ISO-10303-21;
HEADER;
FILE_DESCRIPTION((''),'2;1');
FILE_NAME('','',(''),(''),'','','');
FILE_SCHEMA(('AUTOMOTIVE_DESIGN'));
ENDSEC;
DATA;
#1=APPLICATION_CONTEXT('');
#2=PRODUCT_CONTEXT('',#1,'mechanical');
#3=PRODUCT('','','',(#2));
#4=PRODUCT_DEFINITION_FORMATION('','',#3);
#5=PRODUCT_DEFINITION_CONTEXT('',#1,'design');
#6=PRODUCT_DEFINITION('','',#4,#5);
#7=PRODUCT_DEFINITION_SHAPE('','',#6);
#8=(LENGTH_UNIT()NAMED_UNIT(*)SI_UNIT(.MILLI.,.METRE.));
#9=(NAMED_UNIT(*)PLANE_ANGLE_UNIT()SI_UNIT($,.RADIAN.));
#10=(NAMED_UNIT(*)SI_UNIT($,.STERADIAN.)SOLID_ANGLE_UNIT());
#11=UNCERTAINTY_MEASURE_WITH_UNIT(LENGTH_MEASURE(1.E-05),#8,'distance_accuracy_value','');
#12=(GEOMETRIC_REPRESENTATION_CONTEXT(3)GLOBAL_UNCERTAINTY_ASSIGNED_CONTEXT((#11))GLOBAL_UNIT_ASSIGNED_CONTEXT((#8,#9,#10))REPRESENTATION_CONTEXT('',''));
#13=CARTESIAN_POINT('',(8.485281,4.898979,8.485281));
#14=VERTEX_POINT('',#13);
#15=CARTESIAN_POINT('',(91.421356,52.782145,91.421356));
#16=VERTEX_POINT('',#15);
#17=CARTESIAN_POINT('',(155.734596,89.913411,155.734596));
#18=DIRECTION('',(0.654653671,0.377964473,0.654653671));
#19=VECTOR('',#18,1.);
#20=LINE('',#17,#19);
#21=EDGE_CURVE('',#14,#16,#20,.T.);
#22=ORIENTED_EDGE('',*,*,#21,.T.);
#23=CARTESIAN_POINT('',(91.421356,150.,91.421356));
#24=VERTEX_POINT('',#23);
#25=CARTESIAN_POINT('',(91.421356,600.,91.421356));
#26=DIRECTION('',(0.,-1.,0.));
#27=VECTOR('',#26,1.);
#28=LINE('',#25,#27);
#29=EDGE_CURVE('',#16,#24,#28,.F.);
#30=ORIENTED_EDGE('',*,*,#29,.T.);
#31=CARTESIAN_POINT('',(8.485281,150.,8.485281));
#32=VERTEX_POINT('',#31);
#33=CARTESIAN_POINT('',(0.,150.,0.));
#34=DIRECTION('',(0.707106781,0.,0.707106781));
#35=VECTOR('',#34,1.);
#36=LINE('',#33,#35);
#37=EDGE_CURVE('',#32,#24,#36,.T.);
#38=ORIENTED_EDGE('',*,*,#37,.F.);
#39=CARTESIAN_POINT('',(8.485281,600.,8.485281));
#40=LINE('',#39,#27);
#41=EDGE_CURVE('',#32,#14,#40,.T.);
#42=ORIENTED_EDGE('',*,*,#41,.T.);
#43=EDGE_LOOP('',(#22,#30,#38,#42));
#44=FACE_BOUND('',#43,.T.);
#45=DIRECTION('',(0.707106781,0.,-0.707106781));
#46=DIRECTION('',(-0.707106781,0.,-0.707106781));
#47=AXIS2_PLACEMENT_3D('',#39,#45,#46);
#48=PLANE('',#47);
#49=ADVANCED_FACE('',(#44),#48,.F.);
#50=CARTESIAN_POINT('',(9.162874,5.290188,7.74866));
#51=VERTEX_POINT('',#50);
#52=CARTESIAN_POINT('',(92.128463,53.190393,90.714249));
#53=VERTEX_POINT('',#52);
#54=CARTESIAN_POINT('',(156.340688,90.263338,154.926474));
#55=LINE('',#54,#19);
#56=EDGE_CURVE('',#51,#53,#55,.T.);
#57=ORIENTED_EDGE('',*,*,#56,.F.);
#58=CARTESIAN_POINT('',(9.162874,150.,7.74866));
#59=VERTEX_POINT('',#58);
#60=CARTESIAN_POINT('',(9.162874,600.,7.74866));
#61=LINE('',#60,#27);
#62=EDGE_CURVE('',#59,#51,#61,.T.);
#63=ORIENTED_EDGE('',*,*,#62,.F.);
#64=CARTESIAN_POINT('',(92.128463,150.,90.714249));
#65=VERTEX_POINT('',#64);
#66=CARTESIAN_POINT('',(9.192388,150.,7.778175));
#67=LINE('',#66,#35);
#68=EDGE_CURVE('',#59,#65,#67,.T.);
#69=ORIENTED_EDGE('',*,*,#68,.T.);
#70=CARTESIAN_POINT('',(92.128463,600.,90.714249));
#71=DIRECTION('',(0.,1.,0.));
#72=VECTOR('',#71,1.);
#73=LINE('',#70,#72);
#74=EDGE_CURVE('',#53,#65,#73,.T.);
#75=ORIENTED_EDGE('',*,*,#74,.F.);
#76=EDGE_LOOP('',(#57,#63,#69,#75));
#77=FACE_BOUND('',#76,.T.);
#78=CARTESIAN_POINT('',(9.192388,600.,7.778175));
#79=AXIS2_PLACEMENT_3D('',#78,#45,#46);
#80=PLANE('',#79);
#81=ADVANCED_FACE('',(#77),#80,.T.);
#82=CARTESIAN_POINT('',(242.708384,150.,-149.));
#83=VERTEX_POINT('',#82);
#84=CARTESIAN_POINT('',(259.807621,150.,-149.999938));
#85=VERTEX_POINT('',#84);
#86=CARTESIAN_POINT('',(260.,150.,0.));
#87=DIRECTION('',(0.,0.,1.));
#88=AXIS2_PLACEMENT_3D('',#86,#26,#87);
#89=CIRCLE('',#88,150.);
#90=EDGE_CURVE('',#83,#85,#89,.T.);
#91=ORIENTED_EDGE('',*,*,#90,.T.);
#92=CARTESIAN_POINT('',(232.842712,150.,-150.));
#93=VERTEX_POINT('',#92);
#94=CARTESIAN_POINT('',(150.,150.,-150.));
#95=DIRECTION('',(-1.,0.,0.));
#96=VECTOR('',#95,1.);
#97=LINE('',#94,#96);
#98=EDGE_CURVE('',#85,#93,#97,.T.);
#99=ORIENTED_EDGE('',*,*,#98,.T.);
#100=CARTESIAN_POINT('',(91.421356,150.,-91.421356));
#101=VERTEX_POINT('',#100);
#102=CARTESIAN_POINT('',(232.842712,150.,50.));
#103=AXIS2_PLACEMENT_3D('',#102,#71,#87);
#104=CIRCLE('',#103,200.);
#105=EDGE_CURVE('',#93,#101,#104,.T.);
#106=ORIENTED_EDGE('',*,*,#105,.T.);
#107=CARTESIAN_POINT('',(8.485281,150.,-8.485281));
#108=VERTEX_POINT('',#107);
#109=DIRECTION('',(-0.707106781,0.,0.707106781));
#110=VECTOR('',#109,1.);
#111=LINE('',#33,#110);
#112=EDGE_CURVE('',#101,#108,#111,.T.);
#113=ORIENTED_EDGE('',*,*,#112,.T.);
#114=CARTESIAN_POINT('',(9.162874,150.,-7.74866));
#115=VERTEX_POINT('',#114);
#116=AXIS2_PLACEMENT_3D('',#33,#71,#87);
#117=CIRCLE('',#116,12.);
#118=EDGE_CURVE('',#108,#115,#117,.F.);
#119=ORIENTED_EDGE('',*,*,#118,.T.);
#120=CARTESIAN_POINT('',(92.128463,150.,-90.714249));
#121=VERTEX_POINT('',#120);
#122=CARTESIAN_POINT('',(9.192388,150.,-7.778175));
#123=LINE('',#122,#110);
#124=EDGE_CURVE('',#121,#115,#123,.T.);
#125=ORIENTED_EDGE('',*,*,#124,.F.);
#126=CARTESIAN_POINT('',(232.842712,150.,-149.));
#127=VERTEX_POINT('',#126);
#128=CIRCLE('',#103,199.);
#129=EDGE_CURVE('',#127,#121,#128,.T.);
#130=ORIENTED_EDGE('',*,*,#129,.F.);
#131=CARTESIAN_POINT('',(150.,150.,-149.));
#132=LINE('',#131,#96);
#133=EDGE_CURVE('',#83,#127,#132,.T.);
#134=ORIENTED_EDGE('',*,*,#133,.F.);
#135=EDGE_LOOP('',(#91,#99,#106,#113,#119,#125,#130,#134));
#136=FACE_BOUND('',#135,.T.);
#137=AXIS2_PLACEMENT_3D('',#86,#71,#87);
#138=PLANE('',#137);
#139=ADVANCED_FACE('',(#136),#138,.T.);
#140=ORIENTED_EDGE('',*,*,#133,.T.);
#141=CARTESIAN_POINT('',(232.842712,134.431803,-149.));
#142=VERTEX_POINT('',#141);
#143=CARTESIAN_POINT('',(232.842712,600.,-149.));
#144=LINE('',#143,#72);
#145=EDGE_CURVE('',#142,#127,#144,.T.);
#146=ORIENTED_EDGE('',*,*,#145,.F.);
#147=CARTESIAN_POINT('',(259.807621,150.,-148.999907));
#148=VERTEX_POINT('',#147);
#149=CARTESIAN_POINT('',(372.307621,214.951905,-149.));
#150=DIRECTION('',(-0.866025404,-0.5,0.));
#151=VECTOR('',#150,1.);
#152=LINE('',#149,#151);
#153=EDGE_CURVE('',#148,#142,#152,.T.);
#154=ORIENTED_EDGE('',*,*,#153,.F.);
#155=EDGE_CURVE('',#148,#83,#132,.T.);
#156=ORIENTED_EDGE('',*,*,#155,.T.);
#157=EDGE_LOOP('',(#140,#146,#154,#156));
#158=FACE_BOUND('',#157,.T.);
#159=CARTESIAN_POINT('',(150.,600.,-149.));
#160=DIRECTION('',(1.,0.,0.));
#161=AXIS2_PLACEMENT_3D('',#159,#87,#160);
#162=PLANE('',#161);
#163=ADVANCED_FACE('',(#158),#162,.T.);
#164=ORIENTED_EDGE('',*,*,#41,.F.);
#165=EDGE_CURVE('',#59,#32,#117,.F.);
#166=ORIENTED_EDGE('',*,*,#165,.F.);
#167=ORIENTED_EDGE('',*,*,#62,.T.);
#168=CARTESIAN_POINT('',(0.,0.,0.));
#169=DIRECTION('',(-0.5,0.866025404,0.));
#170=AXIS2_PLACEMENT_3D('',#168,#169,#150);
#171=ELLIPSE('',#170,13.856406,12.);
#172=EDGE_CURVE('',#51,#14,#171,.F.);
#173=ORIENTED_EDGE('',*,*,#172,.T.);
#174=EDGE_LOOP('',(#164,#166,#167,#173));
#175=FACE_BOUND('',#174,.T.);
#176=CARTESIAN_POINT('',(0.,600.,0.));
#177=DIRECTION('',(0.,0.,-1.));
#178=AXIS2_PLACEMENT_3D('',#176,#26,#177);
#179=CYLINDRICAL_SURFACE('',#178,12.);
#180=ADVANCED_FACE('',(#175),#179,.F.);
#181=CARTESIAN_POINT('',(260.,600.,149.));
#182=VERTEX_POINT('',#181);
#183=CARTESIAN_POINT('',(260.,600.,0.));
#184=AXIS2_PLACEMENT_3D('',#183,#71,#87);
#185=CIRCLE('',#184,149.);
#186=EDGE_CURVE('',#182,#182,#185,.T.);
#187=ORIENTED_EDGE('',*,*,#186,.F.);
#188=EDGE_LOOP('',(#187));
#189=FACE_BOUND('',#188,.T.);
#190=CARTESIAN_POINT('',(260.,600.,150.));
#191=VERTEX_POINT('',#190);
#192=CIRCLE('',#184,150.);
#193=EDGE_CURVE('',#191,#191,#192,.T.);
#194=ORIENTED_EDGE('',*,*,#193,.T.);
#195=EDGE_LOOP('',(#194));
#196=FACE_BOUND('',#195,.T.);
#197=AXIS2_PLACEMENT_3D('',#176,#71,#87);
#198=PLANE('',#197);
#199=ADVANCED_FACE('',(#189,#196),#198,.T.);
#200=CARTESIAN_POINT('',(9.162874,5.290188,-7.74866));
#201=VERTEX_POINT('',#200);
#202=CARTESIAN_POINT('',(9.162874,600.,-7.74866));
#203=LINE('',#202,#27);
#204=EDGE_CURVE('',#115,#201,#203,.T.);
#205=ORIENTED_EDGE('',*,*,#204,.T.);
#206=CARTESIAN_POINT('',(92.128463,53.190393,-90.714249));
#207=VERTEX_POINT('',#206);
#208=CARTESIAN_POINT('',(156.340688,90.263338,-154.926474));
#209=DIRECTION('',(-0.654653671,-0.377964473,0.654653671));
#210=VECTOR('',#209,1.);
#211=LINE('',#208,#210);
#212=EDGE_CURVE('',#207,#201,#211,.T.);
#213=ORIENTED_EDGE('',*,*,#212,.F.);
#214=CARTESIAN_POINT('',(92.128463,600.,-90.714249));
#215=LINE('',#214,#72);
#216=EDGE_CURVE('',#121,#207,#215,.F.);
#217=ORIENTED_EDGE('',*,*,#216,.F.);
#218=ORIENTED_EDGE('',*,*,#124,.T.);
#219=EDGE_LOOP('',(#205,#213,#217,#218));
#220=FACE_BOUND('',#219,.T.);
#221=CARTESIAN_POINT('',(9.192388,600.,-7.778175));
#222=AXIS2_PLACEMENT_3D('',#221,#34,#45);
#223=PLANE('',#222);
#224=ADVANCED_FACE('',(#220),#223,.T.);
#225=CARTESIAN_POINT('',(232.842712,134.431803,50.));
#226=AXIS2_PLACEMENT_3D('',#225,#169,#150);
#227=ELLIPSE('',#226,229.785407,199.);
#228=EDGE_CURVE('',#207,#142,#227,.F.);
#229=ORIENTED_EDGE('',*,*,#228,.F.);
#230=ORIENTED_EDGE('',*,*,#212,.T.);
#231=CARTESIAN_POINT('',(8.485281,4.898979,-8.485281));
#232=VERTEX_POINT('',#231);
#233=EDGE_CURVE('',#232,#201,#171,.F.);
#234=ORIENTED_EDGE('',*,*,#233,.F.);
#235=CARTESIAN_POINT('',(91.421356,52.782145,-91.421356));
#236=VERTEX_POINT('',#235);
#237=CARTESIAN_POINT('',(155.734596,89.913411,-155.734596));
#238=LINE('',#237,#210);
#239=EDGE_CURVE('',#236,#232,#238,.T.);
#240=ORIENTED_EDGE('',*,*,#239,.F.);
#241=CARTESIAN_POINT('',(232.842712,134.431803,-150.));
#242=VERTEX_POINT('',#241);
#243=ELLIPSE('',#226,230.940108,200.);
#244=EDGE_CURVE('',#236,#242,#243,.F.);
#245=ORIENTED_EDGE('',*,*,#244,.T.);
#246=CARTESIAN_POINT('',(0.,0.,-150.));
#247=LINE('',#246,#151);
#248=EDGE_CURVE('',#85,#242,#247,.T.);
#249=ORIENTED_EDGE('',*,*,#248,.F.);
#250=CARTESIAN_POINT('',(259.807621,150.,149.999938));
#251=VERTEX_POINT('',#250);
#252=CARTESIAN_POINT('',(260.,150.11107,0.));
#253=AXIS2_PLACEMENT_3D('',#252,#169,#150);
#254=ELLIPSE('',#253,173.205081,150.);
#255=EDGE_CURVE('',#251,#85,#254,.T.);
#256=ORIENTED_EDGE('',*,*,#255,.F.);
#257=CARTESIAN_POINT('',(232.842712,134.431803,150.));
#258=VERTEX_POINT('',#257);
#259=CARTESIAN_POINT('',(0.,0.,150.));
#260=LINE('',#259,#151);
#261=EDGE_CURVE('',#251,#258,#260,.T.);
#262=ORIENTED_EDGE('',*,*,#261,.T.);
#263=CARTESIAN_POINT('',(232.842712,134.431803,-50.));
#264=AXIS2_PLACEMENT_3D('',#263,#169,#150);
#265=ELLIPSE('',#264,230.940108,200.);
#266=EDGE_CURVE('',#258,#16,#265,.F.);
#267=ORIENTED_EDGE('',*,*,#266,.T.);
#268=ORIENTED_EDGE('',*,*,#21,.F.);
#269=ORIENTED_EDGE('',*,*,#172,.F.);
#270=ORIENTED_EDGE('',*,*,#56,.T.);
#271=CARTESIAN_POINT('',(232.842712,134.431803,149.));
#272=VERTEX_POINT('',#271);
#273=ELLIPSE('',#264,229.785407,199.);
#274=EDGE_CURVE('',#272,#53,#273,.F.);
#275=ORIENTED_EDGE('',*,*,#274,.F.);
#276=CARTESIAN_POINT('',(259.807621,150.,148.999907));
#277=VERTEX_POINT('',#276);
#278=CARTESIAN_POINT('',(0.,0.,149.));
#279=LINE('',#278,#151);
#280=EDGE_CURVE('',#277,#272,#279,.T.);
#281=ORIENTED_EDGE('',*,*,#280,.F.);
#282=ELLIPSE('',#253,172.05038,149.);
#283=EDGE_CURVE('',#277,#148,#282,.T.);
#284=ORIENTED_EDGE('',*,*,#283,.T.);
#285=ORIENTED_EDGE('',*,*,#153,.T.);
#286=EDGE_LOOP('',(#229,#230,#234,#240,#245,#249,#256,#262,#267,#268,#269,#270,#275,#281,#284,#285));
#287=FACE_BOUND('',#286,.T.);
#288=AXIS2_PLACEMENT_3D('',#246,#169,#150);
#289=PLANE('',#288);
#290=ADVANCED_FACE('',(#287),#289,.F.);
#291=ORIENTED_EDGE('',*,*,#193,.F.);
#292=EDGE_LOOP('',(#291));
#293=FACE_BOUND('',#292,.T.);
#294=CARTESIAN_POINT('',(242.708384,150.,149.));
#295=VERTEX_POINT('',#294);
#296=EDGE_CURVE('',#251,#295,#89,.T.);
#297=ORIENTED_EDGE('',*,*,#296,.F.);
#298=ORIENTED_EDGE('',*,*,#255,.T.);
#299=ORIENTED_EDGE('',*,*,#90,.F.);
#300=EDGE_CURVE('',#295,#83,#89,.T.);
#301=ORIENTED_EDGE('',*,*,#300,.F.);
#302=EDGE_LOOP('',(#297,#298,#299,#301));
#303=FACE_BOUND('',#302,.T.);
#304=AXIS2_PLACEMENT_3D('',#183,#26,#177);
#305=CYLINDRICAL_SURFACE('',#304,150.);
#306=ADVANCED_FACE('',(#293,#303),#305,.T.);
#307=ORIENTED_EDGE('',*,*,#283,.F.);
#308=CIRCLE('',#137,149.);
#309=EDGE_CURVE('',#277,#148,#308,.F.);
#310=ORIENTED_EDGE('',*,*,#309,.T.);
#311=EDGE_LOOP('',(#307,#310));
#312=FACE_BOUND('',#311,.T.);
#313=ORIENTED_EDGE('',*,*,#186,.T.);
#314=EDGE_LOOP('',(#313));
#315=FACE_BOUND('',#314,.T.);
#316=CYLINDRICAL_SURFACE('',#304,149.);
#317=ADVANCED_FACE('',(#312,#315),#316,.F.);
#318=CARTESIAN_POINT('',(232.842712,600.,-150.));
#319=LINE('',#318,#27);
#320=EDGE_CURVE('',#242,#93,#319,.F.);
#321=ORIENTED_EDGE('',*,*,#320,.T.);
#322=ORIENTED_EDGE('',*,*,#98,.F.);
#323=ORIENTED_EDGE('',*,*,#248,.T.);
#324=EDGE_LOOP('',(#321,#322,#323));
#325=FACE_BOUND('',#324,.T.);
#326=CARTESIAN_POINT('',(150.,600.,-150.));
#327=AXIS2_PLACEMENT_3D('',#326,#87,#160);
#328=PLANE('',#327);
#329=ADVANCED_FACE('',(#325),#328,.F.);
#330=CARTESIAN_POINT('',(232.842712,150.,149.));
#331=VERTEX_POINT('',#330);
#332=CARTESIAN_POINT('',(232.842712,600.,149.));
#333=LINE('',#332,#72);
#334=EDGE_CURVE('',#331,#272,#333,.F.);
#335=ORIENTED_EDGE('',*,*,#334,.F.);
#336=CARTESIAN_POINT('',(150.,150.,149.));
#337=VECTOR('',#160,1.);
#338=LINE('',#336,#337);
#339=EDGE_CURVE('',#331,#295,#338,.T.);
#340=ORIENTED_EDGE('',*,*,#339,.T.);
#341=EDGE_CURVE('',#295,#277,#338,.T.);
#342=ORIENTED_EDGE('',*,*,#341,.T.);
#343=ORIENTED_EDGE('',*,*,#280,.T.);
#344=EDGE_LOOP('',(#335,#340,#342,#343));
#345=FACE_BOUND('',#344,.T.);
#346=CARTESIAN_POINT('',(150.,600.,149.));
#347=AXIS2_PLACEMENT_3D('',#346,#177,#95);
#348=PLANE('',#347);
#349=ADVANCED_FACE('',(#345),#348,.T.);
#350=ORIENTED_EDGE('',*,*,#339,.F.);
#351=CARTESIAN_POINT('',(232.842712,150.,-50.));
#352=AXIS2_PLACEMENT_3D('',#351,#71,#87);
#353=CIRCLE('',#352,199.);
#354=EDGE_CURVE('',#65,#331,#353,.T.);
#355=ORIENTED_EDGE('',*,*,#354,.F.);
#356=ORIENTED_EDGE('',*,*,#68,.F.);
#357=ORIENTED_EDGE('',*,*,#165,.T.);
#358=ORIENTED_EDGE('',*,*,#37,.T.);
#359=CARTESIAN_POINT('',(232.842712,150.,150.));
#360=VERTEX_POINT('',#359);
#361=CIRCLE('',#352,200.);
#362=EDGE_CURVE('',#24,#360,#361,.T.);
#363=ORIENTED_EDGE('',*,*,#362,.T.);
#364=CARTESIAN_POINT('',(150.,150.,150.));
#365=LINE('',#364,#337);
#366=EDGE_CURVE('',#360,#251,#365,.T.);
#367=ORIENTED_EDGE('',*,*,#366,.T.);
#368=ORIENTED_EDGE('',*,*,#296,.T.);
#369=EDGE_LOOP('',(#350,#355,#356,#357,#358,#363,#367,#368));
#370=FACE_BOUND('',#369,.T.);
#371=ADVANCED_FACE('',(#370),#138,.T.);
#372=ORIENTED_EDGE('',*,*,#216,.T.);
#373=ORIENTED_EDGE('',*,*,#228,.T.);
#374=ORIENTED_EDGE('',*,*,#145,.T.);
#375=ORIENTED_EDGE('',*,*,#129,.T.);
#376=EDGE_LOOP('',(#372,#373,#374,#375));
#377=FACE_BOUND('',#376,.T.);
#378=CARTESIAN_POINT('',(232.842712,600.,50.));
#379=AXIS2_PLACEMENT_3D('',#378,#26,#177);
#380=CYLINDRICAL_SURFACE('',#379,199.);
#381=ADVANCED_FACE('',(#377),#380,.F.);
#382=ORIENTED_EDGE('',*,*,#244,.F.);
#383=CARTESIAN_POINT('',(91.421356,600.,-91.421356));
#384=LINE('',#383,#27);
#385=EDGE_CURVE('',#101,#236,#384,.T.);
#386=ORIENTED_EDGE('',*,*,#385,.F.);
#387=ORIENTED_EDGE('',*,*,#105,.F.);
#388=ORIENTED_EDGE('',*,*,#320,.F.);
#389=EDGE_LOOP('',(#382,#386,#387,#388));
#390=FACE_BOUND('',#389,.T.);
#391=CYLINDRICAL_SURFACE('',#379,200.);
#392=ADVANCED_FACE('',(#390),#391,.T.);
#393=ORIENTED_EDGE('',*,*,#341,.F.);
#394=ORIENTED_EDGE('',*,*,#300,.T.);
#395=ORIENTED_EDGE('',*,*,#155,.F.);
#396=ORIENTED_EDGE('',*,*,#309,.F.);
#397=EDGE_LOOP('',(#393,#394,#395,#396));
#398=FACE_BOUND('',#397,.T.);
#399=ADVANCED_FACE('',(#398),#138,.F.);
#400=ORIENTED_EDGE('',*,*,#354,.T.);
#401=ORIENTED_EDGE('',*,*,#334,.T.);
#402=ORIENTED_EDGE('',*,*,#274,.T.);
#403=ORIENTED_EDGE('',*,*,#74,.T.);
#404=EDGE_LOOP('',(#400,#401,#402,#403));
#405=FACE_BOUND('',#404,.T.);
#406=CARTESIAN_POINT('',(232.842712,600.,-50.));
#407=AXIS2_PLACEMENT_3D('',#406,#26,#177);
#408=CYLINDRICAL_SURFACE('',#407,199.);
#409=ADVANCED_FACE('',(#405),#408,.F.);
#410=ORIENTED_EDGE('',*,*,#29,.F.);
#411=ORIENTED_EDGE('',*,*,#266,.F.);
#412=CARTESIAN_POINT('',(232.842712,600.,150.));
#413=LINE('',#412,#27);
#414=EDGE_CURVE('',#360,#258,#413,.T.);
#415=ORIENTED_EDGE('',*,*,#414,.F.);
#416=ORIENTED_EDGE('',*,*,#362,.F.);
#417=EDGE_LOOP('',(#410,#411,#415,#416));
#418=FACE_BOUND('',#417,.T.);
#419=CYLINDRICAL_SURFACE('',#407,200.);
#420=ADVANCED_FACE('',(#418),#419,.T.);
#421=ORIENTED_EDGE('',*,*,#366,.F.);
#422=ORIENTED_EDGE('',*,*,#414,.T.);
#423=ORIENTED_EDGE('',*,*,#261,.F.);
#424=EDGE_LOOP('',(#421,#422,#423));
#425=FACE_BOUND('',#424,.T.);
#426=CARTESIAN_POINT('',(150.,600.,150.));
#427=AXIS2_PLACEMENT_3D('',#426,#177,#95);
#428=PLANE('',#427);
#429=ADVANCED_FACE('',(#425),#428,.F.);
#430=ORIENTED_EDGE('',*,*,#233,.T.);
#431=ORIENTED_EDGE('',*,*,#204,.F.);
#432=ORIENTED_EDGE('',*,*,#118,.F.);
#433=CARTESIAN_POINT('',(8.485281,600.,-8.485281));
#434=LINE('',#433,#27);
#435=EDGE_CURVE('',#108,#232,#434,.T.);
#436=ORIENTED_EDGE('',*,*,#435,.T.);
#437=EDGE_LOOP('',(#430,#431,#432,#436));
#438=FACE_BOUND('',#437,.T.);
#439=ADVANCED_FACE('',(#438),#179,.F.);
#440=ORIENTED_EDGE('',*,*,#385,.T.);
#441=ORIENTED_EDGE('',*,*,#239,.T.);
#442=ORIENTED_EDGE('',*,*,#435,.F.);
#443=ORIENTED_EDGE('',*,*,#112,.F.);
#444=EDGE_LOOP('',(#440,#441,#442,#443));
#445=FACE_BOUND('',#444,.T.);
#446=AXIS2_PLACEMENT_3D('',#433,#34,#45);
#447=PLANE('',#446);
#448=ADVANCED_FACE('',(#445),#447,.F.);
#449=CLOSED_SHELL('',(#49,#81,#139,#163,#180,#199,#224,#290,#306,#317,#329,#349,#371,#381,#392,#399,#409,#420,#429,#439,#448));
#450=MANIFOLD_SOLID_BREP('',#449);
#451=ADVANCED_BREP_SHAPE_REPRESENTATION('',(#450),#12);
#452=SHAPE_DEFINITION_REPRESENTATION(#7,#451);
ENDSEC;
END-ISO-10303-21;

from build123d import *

# Parameters (mm, degrees)
BOSS_EXTRUDE1_DEPTH     = 600
CUT_EXTRUDE1_DEPTH      = 743.024258364
CUT_EXTRUDE1_DEPTH_BACK = 743.024258364
CUT_EXTRUDE2_START      = -450
CUT_EXTRUDE2_DEPTH      = 450
FILLET1_R               = 200
SHELL2_START            = 53.190392924
SHELL2_OUTLINE_R        = 149
SHELL2_DEPTH            = 546.809607076
SHELL2_START_2          = 5.290187796
SHELL2_2_DEPTH          = 144.709812204


# Read off the part's stored shape, not the designer's step: Shell2
with BuildPart() as part:
    # Sketch1 → Boss-Extrude1 (new body)
    with BuildSketch(Plane(origin=(0, 0, 0), x_dir=(1, 0, 0), z_dir=(0, 1, 0))):
        with BuildLine():
            Line((8.485281374, -8.485281374), (150, -150))
            Line((150, -150), (260, -150))
            ThreePointArc((260, -150), (410, 0), (260, 150))
            Line((260, 150), (150, 150))
            Line((150, 150), (8.485281374, 8.485281374))
            ThreePointArc((8.485281374, 8.485281374), (12, 0), (8.485281374, -8.485281374))
        make_face()
    extrude(amount=BOSS_EXTRUDE1_DEPTH)

    # Sketch2 → Cut-Extrude1 (cut, two sides: drawn at the far end of the back side and taken through both)
    with BuildSketch(Plane.XY.offset(-CUT_EXTRUDE1_DEPTH_BACK)):
        Polygon((0, 0), (410, 236.713610368), (410, 0), align=None)
    extrude(amount=CUT_EXTRUDE1_DEPTH + CUT_EXTRUDE1_DEPTH_BACK, mode=Mode.SUBTRACT)

    # Sketch3 → Cut-Extrude2 (cut)
    with BuildSketch(Plane(origin=(0, 600, 0), x_dir=(1, 0, 0), z_dir=(0, 1, 0)).offset(CUT_EXTRUDE2_START)):
        with BuildLine():
            Line((0, 0), (150, 150))
            Line((150, 150), (260, 150))
            ThreePointArc((260, 150), (110, 0), (260, -150))
            Line((260, -150), (150, -150))
            Line((150, -150), (0, 0))
        make_face()
    extrude(amount=CUT_EXTRUDE2_DEPTH, mode=Mode.SUBTRACT)

    # Fillet1
    fillet1_edges = [part.edges().sort_by_distance(p)[0] for p in [
        (150, 118.301270189, 150),
        (150, 118.301270189, -150),
    ]]
    fillet(fillet1_edges, radius=FILLET1_R)

    # Shell2 outline → Shell2 (cut)
    with BuildSketch(Plane(origin=(0, 0, 0), x_dir=(1, 0, 0), z_dir=(0, 1, 0)).offset(SHELL2_START)):
        with Locations((260, 0)):
            Circle(SHELL2_OUTLINE_R)
    extrude(amount=SHELL2_DEPTH, mode=Mode.SUBTRACT)

    # Shell2 2 outline → Shell2 2 (cut)
    with BuildSketch(Plane(origin=(0, 0, 0), x_dir=(1, 0, 0), z_dir=(0, 1, 0)).offset(SHELL2_START_2)):
        with BuildLine():
            Line((9.162874044, -7.748660481), (92.128463018, -90.714249456))
            ThreePointArc((92.128463018, -90.714249456), (156.688709434, -133.85202697), (232.842712475, -149))
            Line((232.842712475, -149), (260, -149))
            ThreePointArc((260, -149), (111, 0), (260, 149))
            Line((260, 149), (232.842712475, 149))
            ThreePointArc((232.842712475, 149), (156.688709434, 133.85202697), (92.128463018, 90.714249456))
            Line((92.128463018, 90.714249456), (9.162874044, 7.748660481))
            ThreePointArc((9.162874044, 7.748660481), (12, 0), (9.162874044, -7.748660481))
        make_face()
    extrude(amount=SHELL2_2_DEPTH, mode=Mode.SUBTRACT)


solid = part.part
